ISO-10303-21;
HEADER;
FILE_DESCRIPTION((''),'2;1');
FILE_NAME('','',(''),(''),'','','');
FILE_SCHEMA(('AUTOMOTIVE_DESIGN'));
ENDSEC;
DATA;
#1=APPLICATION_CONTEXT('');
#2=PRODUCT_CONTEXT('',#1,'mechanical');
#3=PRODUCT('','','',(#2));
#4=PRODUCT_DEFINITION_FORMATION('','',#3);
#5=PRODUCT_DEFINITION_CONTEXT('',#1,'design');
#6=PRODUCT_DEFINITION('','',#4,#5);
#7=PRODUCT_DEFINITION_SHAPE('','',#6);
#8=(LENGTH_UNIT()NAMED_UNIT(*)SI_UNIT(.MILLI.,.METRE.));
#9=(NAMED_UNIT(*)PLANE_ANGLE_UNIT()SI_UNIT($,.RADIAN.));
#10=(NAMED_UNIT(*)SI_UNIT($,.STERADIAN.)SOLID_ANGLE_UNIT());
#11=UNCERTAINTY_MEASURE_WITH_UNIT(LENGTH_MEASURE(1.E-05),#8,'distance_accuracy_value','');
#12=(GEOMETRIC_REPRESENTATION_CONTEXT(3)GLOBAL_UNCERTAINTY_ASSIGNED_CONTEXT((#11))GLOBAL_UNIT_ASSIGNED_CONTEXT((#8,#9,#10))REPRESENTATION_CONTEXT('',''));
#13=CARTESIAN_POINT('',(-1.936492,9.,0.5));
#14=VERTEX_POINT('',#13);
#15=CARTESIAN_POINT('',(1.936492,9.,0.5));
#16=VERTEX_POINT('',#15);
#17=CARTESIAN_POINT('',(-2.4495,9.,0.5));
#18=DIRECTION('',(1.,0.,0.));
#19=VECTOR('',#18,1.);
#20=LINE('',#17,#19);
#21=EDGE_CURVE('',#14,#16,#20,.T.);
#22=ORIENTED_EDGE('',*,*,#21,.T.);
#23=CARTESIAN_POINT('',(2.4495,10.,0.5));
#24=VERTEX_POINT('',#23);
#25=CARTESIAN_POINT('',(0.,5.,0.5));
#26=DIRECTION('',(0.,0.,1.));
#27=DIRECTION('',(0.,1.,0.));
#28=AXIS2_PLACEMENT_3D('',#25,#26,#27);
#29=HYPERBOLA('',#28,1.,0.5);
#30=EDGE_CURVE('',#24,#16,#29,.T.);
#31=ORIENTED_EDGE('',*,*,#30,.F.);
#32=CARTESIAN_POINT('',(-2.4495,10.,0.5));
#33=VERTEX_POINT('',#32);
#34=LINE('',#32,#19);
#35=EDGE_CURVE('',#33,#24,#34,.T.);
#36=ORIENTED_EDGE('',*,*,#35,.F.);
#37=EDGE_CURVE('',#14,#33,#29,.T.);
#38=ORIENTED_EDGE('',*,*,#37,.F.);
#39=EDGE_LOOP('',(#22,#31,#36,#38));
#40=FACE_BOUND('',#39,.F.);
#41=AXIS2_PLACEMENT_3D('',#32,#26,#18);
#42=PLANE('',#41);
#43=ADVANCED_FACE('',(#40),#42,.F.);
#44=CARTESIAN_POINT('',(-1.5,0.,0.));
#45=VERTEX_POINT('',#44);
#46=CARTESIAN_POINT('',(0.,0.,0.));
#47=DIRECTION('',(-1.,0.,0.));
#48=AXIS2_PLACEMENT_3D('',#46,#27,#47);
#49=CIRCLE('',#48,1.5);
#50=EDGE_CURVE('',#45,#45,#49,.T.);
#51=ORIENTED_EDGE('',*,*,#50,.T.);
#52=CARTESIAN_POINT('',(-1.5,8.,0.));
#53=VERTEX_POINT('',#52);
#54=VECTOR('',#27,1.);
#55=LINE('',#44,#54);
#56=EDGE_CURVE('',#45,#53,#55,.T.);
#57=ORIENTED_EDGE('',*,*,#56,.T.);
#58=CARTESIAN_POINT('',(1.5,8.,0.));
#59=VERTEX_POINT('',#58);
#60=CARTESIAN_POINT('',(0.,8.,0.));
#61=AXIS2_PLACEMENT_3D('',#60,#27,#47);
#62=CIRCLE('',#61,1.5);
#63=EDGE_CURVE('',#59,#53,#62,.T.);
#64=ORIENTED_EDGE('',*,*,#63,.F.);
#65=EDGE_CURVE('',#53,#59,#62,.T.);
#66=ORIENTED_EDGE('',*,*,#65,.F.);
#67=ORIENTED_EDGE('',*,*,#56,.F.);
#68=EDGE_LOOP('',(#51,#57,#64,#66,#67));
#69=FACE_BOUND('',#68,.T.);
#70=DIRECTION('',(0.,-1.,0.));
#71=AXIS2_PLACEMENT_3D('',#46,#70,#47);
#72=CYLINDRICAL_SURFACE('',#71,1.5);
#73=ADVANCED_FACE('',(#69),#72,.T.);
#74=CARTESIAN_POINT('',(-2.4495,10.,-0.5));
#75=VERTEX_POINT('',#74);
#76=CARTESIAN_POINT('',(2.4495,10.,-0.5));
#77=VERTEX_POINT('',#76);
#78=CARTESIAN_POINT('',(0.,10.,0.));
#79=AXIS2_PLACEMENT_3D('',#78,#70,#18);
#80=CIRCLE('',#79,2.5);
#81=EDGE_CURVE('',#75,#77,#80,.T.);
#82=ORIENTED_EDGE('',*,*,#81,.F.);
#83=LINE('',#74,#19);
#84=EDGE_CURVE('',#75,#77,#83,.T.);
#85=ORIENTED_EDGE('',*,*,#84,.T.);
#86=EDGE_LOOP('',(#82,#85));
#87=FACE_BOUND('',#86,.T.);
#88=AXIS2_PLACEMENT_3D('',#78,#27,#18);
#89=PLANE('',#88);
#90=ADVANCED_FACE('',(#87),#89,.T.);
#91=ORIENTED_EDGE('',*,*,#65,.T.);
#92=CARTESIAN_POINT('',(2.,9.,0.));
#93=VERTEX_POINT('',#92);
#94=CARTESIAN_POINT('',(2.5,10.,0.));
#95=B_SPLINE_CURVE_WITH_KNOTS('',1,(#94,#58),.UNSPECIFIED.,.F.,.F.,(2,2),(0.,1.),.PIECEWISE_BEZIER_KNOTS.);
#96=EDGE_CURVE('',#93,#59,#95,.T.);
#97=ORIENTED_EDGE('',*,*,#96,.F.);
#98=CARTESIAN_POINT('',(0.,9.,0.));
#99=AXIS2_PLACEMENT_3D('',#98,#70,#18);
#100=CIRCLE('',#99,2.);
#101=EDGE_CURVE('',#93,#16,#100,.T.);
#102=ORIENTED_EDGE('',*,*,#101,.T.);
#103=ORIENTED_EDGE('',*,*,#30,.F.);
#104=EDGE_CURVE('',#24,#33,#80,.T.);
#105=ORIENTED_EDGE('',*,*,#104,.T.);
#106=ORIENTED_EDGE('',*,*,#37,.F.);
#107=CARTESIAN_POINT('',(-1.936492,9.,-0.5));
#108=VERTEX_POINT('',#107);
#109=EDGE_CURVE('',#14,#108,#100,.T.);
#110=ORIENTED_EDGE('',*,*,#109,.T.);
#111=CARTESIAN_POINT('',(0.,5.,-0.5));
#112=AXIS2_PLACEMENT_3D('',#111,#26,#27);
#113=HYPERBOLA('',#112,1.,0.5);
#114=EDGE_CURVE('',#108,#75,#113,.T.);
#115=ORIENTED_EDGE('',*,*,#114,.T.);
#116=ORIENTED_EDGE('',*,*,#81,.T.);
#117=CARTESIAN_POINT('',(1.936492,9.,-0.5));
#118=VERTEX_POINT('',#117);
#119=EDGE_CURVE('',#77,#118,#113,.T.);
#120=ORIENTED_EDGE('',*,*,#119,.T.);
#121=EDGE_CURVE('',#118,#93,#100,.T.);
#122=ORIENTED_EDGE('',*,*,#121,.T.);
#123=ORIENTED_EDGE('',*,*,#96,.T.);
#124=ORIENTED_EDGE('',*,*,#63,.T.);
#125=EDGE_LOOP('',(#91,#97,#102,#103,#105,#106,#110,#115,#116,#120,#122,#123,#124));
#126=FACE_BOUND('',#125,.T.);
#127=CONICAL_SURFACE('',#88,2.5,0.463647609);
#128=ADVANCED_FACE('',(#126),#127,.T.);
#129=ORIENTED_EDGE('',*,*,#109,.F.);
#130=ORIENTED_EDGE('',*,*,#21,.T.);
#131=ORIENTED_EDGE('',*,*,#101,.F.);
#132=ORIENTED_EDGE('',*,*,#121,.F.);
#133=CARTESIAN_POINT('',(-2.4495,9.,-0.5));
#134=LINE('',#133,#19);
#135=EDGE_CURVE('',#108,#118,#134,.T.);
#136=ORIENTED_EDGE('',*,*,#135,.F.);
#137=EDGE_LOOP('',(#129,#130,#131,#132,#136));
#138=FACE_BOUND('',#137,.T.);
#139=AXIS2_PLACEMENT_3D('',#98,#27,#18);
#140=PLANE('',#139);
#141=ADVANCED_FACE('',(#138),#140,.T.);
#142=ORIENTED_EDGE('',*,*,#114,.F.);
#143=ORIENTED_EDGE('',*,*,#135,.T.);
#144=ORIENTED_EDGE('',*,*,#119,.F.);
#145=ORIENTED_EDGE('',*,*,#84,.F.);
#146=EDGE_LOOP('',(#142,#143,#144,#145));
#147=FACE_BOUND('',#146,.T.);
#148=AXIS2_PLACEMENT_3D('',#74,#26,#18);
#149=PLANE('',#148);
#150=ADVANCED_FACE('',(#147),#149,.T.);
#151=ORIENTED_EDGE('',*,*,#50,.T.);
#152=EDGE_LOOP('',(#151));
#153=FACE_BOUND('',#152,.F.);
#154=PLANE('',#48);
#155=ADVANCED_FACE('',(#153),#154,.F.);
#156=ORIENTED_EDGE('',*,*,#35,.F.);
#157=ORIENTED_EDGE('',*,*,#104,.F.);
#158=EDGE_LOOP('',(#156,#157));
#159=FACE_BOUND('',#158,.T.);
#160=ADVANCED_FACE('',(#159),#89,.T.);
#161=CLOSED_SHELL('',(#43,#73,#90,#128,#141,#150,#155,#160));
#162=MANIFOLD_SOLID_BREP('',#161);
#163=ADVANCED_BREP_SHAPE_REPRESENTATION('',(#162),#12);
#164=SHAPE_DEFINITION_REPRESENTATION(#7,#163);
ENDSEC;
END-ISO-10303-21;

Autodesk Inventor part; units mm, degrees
ref_plane "YZ Plane" through (0, 0, 0) normal (1, 0, 0) x (0, 1, 0)
ref_plane "XZ Plane" through (0, 0, 0) normal (0, 1, 0) x (-1, 0, 0)
sketch "Sketch1" plane through (0, 0, 0) normal (0, 1, 0) x (-1, 0, 0)
  circle A0 centre (0, 0) radius 1.5
  dimension "d0" = 3
extrude "Extrusion1" add sketch "Sketch1" along normal blind 8
thread "Thread1" size "M3x0.5" class "6g" standard "ANSI Metric M Profile" full length
ref_plane "Work Plane1" through (0, 10, 0) normal (0, 1, 0) x (1, 0, 0)
sketch "Sketch4" plane through (0, 10, 0) normal (0, 1, 0) x (1, 0, 0)
  circle A0 centre (0, 0) radius 2.5
  dimension "d14" = 5
loft "Loft1" add profiles "Sketch4" section 2 edges at (1.5, 8, 0)
sketch "Sketch5" plane through (0, 10, 0) normal (0, 1, 0) x (1, 0, 0)
  circle A0 centre (0, 0) radius 2.5 projected
  line L0 (-2.4495, 0.5) -> (2.4495, 0.5)
  line L1 (-2.4495, -0.5) -> (2.4495, -0.5)
  line L2 (0, 0) -> (2.0973, 0) construction
  dimension "d19" = 1
extrude "Extrusion4" cut sketch "Sketch5" against normal blind 1 contours A0 L1 L0
properties part number "Screw_CountersunkHead_3x10" material "Steel, Galvanized"
